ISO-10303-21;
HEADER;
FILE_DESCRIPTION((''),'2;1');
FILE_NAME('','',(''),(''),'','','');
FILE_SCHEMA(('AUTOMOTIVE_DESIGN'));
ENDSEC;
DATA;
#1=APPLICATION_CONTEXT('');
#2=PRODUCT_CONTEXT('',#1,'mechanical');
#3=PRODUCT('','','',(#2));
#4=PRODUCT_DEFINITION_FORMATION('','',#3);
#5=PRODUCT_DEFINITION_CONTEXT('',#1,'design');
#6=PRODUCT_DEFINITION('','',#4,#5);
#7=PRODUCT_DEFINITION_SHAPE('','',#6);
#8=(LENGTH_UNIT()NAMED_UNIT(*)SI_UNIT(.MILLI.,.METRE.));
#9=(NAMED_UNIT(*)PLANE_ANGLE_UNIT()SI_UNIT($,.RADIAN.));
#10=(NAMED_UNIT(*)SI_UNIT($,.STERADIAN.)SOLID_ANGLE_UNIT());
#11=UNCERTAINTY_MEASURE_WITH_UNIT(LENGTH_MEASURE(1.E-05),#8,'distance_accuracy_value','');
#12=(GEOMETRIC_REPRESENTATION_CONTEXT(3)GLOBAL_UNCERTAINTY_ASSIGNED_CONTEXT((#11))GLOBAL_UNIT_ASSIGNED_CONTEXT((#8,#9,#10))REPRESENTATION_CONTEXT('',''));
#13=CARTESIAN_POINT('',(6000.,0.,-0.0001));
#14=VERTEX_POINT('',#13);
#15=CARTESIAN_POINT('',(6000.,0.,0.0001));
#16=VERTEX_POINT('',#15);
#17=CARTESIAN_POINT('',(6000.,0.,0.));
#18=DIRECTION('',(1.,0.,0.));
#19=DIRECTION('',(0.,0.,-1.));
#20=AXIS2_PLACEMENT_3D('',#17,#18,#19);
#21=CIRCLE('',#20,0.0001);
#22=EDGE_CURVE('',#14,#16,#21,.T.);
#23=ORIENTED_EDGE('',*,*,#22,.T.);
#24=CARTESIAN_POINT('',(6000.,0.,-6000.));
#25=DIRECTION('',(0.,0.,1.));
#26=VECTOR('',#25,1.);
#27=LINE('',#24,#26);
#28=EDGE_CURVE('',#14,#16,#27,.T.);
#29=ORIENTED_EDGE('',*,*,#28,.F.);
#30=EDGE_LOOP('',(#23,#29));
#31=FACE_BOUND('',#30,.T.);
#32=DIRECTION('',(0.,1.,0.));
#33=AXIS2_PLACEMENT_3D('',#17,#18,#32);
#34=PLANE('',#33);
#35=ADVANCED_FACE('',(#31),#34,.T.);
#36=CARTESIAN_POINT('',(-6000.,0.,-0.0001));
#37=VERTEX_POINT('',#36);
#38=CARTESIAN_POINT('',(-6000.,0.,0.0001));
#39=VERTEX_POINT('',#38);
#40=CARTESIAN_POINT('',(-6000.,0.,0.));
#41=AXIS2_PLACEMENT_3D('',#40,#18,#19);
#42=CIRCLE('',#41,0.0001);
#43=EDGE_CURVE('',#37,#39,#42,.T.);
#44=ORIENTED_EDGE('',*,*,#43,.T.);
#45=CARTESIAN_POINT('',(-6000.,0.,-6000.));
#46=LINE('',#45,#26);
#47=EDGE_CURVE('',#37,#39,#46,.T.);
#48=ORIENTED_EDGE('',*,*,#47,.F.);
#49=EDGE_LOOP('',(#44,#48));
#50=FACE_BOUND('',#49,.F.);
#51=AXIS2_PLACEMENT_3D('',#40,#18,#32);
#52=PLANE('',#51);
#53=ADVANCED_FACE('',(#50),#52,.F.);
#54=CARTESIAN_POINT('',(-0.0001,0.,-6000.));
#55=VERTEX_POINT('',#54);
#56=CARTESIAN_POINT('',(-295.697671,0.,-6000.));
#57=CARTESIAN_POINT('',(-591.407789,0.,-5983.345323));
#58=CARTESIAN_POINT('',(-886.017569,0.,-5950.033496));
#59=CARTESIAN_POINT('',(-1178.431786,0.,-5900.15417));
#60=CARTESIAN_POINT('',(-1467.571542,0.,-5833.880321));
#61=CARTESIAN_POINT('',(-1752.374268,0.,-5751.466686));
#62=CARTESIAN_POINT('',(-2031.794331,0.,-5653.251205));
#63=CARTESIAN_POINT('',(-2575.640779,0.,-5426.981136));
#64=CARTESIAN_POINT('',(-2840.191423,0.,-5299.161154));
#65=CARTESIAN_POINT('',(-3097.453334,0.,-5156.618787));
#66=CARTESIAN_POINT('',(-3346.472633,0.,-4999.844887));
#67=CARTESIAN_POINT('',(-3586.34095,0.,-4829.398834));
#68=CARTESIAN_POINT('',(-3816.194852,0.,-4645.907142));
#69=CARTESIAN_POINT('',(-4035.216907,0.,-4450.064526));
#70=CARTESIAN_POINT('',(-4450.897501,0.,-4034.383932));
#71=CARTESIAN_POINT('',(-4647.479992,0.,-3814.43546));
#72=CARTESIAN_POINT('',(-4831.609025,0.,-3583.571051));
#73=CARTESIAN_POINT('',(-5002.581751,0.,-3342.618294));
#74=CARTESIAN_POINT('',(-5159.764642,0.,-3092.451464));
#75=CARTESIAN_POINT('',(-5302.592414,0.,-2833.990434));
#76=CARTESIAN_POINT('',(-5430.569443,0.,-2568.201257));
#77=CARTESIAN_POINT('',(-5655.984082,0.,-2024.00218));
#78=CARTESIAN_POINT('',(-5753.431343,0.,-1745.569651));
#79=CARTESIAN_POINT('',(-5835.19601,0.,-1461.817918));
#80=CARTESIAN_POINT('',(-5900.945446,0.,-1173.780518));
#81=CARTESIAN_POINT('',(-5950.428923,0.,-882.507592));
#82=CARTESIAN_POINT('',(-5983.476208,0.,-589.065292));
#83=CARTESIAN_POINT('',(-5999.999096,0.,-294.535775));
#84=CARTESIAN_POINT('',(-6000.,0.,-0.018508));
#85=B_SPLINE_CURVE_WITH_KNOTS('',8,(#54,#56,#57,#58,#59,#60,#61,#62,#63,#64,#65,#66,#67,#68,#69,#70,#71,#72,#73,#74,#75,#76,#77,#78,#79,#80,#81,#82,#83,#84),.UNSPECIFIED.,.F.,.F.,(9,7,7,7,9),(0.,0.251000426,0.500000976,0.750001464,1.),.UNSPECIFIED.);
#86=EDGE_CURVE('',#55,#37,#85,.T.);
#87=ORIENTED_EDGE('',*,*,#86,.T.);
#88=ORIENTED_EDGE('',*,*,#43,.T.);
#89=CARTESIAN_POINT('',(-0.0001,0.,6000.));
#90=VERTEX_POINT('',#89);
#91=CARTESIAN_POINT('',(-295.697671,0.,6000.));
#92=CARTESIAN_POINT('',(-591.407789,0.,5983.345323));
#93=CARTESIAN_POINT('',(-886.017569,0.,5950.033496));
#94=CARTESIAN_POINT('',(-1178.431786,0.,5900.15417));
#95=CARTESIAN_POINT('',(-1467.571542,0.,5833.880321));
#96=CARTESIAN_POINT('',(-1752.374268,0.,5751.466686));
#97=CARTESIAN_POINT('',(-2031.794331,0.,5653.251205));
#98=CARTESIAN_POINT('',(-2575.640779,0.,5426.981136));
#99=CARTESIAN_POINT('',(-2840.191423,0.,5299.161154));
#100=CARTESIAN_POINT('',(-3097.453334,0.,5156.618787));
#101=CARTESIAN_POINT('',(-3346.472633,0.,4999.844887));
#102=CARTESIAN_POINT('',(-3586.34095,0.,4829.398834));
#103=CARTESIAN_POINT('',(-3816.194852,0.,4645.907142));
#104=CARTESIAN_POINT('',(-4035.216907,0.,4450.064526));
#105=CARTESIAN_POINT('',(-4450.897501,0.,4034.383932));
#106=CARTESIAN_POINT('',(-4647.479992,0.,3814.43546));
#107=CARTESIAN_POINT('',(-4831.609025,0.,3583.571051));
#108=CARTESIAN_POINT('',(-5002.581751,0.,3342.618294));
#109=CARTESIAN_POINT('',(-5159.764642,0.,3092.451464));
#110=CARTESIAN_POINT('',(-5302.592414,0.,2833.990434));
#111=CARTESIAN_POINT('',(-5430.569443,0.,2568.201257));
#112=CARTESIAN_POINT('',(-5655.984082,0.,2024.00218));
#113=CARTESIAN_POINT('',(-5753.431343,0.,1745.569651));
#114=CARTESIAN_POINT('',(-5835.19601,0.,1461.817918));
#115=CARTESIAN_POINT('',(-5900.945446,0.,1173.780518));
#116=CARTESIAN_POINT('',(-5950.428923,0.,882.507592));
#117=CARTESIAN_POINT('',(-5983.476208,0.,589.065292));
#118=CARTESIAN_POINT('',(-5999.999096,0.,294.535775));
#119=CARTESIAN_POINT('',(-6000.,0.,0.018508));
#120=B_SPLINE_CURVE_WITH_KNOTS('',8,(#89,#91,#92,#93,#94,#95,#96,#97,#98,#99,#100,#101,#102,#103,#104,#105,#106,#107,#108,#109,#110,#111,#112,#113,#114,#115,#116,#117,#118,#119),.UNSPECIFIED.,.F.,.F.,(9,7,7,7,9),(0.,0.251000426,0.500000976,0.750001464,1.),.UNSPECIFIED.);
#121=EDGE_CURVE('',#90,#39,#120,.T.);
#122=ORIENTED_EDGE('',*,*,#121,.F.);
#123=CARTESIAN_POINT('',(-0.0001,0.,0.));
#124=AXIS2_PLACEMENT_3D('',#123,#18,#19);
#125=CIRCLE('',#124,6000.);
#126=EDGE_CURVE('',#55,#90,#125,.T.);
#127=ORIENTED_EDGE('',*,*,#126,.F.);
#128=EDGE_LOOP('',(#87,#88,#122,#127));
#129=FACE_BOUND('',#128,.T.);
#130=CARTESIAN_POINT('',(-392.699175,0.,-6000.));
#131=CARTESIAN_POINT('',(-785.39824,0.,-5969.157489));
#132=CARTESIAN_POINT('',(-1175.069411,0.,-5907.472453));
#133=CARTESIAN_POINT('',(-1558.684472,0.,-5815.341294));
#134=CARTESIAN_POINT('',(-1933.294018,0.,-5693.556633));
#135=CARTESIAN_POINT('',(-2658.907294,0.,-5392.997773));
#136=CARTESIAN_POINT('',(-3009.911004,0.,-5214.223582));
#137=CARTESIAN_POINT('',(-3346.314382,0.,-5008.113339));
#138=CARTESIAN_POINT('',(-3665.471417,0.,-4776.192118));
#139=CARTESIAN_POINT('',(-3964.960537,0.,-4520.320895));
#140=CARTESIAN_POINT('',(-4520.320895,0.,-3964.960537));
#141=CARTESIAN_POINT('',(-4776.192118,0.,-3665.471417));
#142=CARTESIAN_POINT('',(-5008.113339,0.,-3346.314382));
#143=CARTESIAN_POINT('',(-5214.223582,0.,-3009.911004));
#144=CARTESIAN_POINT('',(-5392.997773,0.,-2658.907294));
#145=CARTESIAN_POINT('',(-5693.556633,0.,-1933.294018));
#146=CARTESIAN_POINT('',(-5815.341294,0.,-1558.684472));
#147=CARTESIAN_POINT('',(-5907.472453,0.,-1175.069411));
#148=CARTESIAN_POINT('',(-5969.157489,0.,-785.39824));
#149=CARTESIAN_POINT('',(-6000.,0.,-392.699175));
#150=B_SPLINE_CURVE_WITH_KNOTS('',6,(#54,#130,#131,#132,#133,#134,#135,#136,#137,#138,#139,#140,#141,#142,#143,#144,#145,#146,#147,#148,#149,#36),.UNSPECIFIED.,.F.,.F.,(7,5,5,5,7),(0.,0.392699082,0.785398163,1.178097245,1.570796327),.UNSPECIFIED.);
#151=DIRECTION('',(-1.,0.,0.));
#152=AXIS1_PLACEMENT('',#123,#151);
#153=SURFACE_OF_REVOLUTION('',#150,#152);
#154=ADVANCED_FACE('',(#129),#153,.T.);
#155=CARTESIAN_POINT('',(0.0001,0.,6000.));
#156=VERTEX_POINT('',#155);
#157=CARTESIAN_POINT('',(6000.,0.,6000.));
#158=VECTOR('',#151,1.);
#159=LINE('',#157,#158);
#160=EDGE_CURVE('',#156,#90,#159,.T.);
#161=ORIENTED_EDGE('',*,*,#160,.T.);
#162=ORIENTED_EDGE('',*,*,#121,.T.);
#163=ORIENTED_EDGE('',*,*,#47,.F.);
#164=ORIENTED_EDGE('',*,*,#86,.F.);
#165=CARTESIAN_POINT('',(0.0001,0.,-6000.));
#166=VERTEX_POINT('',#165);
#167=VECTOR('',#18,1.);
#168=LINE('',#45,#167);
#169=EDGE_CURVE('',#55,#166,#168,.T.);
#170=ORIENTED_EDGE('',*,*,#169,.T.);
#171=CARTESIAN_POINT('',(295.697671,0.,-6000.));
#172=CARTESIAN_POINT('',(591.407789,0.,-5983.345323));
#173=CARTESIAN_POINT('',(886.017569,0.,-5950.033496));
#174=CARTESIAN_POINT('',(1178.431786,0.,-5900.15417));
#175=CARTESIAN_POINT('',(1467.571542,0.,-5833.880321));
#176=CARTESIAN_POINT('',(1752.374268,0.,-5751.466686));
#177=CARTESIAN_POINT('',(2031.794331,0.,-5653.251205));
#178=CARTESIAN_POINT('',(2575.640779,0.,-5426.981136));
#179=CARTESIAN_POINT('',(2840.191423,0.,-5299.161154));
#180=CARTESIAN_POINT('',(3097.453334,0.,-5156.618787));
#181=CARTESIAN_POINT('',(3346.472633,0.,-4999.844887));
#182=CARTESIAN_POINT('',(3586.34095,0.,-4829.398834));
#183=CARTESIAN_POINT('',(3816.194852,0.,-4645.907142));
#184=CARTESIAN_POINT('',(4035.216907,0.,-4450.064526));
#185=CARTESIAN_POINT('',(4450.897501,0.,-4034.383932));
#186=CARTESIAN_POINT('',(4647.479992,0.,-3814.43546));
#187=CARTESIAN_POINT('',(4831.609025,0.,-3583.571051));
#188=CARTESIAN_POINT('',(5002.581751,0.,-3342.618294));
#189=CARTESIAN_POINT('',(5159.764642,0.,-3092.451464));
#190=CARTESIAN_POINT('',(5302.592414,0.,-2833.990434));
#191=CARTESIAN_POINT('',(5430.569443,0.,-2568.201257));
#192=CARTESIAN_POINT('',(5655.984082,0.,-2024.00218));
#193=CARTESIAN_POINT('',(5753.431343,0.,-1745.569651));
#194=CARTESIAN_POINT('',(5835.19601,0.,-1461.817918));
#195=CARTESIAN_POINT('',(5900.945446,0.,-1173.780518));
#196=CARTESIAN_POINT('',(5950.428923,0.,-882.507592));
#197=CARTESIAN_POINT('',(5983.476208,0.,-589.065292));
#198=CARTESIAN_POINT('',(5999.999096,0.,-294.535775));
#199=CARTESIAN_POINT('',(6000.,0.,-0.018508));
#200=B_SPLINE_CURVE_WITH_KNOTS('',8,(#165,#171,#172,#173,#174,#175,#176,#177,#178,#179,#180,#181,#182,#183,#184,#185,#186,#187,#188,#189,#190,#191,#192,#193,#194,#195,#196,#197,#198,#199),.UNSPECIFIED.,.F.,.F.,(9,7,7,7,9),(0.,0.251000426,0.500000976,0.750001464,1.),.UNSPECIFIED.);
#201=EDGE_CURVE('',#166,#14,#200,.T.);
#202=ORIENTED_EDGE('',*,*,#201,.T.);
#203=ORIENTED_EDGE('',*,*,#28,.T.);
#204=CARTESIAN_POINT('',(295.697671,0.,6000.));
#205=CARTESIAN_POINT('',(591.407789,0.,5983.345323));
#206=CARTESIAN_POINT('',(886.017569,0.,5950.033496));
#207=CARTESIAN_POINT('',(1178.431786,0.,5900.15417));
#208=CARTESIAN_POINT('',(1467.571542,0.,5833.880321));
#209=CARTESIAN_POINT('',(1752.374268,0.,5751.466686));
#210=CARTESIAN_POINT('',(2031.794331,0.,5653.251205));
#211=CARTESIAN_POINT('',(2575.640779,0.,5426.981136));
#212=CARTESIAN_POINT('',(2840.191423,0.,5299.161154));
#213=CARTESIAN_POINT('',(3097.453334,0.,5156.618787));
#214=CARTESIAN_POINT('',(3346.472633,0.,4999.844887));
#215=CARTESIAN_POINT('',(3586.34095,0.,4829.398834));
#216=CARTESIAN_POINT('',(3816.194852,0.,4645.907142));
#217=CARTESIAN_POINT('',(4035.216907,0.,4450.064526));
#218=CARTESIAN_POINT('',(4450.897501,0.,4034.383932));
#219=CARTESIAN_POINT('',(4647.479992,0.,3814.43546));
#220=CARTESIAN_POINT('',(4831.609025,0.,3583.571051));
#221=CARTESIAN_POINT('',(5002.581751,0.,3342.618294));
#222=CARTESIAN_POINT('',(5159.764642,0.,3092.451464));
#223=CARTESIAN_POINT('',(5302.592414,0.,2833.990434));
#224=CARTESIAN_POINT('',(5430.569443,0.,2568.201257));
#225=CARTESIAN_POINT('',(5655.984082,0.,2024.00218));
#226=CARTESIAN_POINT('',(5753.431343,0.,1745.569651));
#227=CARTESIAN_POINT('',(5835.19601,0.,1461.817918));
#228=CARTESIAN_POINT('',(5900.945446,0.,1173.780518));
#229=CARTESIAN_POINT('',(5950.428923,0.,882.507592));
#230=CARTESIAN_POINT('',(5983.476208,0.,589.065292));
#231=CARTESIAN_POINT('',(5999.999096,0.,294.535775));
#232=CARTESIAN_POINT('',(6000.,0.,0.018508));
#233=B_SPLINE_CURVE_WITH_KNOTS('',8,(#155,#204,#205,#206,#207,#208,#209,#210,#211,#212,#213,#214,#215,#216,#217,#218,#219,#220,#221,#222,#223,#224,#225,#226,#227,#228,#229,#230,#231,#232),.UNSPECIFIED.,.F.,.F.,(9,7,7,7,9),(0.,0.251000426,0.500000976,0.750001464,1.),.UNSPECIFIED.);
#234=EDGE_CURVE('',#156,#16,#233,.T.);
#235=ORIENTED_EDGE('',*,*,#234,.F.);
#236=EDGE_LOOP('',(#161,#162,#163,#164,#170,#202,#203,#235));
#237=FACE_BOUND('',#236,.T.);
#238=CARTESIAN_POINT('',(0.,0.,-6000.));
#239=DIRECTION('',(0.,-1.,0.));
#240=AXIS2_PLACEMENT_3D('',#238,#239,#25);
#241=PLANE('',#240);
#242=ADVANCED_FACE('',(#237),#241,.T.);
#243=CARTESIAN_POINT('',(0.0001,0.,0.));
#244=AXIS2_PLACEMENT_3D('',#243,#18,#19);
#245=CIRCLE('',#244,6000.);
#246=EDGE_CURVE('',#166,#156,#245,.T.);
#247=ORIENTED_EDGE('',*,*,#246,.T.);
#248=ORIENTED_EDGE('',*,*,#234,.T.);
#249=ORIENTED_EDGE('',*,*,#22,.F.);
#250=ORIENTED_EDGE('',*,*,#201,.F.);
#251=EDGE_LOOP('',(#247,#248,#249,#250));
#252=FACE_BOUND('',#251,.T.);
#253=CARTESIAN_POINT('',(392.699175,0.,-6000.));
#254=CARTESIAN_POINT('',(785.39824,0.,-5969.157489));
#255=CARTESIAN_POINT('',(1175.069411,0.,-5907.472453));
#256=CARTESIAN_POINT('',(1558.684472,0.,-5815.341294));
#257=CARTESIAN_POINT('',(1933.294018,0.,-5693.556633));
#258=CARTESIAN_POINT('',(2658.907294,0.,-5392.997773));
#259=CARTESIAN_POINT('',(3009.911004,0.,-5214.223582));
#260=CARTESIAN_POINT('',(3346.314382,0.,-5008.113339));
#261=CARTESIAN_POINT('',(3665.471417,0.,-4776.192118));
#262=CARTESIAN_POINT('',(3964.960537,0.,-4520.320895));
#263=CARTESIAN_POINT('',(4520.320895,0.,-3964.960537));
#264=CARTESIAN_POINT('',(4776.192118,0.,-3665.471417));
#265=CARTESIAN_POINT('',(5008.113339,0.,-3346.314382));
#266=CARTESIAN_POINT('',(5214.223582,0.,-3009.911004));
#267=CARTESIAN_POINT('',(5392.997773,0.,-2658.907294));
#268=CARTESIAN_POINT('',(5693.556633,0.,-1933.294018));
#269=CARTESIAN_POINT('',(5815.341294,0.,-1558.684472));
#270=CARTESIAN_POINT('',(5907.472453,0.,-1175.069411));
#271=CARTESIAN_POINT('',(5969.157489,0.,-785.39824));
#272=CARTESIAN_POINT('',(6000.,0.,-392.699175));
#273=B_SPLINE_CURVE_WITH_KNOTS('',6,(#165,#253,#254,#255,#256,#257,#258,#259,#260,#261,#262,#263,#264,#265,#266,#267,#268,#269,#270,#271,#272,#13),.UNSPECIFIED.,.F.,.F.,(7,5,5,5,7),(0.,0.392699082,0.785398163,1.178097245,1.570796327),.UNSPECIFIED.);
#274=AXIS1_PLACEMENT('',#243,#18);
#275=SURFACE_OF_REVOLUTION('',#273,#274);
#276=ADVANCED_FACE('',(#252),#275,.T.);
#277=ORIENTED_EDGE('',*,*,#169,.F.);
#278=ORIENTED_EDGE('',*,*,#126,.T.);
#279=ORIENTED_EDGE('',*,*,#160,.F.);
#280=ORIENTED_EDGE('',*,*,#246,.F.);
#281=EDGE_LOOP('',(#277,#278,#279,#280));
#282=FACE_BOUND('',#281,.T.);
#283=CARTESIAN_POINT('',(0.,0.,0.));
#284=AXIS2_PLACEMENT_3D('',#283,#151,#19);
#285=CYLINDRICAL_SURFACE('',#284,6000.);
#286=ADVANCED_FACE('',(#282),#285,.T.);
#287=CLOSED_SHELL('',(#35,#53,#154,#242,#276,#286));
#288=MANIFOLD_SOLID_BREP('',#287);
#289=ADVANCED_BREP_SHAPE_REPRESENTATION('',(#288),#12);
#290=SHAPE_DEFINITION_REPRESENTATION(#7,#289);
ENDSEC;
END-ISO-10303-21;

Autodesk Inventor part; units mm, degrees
ref_plane "YZ Plane" through (0, 0, 0) normal (1, 0, 0) x (0, 1, 0)
ref_plane "XZ Plane" through (0, 0, 0) normal (0, 1, 0) x (-1, 0, 0)
ref_plane "XY Plane" through (0, 0, 0) normal (0, 0, 1) x (1, 0, 0)
sketch "Sketch2" plane through (0, 0, 0) normal (1, 0, 0) x (0, 1, 0)
  arc A0 (0, -6000) -> (0, 6000) centre (0, 0) ccw
  line L0 (0, -6000) -> (0, 6000)
  dimension "d2" = 12000
  dimension "d3" = 12000
extrude "Extrusion1" add sketch "Sketch2" along normal mid plane 12000
fillet "Fillet1" radius 6000 2 edges at (6000, 6000, 0) (-6000, 6000, 0)
equation "\"d3\" = d2"
equation "\"d4\" = d2"
equation "\"d6\" = 0.5 * d2"
properties part number "11_Range"
